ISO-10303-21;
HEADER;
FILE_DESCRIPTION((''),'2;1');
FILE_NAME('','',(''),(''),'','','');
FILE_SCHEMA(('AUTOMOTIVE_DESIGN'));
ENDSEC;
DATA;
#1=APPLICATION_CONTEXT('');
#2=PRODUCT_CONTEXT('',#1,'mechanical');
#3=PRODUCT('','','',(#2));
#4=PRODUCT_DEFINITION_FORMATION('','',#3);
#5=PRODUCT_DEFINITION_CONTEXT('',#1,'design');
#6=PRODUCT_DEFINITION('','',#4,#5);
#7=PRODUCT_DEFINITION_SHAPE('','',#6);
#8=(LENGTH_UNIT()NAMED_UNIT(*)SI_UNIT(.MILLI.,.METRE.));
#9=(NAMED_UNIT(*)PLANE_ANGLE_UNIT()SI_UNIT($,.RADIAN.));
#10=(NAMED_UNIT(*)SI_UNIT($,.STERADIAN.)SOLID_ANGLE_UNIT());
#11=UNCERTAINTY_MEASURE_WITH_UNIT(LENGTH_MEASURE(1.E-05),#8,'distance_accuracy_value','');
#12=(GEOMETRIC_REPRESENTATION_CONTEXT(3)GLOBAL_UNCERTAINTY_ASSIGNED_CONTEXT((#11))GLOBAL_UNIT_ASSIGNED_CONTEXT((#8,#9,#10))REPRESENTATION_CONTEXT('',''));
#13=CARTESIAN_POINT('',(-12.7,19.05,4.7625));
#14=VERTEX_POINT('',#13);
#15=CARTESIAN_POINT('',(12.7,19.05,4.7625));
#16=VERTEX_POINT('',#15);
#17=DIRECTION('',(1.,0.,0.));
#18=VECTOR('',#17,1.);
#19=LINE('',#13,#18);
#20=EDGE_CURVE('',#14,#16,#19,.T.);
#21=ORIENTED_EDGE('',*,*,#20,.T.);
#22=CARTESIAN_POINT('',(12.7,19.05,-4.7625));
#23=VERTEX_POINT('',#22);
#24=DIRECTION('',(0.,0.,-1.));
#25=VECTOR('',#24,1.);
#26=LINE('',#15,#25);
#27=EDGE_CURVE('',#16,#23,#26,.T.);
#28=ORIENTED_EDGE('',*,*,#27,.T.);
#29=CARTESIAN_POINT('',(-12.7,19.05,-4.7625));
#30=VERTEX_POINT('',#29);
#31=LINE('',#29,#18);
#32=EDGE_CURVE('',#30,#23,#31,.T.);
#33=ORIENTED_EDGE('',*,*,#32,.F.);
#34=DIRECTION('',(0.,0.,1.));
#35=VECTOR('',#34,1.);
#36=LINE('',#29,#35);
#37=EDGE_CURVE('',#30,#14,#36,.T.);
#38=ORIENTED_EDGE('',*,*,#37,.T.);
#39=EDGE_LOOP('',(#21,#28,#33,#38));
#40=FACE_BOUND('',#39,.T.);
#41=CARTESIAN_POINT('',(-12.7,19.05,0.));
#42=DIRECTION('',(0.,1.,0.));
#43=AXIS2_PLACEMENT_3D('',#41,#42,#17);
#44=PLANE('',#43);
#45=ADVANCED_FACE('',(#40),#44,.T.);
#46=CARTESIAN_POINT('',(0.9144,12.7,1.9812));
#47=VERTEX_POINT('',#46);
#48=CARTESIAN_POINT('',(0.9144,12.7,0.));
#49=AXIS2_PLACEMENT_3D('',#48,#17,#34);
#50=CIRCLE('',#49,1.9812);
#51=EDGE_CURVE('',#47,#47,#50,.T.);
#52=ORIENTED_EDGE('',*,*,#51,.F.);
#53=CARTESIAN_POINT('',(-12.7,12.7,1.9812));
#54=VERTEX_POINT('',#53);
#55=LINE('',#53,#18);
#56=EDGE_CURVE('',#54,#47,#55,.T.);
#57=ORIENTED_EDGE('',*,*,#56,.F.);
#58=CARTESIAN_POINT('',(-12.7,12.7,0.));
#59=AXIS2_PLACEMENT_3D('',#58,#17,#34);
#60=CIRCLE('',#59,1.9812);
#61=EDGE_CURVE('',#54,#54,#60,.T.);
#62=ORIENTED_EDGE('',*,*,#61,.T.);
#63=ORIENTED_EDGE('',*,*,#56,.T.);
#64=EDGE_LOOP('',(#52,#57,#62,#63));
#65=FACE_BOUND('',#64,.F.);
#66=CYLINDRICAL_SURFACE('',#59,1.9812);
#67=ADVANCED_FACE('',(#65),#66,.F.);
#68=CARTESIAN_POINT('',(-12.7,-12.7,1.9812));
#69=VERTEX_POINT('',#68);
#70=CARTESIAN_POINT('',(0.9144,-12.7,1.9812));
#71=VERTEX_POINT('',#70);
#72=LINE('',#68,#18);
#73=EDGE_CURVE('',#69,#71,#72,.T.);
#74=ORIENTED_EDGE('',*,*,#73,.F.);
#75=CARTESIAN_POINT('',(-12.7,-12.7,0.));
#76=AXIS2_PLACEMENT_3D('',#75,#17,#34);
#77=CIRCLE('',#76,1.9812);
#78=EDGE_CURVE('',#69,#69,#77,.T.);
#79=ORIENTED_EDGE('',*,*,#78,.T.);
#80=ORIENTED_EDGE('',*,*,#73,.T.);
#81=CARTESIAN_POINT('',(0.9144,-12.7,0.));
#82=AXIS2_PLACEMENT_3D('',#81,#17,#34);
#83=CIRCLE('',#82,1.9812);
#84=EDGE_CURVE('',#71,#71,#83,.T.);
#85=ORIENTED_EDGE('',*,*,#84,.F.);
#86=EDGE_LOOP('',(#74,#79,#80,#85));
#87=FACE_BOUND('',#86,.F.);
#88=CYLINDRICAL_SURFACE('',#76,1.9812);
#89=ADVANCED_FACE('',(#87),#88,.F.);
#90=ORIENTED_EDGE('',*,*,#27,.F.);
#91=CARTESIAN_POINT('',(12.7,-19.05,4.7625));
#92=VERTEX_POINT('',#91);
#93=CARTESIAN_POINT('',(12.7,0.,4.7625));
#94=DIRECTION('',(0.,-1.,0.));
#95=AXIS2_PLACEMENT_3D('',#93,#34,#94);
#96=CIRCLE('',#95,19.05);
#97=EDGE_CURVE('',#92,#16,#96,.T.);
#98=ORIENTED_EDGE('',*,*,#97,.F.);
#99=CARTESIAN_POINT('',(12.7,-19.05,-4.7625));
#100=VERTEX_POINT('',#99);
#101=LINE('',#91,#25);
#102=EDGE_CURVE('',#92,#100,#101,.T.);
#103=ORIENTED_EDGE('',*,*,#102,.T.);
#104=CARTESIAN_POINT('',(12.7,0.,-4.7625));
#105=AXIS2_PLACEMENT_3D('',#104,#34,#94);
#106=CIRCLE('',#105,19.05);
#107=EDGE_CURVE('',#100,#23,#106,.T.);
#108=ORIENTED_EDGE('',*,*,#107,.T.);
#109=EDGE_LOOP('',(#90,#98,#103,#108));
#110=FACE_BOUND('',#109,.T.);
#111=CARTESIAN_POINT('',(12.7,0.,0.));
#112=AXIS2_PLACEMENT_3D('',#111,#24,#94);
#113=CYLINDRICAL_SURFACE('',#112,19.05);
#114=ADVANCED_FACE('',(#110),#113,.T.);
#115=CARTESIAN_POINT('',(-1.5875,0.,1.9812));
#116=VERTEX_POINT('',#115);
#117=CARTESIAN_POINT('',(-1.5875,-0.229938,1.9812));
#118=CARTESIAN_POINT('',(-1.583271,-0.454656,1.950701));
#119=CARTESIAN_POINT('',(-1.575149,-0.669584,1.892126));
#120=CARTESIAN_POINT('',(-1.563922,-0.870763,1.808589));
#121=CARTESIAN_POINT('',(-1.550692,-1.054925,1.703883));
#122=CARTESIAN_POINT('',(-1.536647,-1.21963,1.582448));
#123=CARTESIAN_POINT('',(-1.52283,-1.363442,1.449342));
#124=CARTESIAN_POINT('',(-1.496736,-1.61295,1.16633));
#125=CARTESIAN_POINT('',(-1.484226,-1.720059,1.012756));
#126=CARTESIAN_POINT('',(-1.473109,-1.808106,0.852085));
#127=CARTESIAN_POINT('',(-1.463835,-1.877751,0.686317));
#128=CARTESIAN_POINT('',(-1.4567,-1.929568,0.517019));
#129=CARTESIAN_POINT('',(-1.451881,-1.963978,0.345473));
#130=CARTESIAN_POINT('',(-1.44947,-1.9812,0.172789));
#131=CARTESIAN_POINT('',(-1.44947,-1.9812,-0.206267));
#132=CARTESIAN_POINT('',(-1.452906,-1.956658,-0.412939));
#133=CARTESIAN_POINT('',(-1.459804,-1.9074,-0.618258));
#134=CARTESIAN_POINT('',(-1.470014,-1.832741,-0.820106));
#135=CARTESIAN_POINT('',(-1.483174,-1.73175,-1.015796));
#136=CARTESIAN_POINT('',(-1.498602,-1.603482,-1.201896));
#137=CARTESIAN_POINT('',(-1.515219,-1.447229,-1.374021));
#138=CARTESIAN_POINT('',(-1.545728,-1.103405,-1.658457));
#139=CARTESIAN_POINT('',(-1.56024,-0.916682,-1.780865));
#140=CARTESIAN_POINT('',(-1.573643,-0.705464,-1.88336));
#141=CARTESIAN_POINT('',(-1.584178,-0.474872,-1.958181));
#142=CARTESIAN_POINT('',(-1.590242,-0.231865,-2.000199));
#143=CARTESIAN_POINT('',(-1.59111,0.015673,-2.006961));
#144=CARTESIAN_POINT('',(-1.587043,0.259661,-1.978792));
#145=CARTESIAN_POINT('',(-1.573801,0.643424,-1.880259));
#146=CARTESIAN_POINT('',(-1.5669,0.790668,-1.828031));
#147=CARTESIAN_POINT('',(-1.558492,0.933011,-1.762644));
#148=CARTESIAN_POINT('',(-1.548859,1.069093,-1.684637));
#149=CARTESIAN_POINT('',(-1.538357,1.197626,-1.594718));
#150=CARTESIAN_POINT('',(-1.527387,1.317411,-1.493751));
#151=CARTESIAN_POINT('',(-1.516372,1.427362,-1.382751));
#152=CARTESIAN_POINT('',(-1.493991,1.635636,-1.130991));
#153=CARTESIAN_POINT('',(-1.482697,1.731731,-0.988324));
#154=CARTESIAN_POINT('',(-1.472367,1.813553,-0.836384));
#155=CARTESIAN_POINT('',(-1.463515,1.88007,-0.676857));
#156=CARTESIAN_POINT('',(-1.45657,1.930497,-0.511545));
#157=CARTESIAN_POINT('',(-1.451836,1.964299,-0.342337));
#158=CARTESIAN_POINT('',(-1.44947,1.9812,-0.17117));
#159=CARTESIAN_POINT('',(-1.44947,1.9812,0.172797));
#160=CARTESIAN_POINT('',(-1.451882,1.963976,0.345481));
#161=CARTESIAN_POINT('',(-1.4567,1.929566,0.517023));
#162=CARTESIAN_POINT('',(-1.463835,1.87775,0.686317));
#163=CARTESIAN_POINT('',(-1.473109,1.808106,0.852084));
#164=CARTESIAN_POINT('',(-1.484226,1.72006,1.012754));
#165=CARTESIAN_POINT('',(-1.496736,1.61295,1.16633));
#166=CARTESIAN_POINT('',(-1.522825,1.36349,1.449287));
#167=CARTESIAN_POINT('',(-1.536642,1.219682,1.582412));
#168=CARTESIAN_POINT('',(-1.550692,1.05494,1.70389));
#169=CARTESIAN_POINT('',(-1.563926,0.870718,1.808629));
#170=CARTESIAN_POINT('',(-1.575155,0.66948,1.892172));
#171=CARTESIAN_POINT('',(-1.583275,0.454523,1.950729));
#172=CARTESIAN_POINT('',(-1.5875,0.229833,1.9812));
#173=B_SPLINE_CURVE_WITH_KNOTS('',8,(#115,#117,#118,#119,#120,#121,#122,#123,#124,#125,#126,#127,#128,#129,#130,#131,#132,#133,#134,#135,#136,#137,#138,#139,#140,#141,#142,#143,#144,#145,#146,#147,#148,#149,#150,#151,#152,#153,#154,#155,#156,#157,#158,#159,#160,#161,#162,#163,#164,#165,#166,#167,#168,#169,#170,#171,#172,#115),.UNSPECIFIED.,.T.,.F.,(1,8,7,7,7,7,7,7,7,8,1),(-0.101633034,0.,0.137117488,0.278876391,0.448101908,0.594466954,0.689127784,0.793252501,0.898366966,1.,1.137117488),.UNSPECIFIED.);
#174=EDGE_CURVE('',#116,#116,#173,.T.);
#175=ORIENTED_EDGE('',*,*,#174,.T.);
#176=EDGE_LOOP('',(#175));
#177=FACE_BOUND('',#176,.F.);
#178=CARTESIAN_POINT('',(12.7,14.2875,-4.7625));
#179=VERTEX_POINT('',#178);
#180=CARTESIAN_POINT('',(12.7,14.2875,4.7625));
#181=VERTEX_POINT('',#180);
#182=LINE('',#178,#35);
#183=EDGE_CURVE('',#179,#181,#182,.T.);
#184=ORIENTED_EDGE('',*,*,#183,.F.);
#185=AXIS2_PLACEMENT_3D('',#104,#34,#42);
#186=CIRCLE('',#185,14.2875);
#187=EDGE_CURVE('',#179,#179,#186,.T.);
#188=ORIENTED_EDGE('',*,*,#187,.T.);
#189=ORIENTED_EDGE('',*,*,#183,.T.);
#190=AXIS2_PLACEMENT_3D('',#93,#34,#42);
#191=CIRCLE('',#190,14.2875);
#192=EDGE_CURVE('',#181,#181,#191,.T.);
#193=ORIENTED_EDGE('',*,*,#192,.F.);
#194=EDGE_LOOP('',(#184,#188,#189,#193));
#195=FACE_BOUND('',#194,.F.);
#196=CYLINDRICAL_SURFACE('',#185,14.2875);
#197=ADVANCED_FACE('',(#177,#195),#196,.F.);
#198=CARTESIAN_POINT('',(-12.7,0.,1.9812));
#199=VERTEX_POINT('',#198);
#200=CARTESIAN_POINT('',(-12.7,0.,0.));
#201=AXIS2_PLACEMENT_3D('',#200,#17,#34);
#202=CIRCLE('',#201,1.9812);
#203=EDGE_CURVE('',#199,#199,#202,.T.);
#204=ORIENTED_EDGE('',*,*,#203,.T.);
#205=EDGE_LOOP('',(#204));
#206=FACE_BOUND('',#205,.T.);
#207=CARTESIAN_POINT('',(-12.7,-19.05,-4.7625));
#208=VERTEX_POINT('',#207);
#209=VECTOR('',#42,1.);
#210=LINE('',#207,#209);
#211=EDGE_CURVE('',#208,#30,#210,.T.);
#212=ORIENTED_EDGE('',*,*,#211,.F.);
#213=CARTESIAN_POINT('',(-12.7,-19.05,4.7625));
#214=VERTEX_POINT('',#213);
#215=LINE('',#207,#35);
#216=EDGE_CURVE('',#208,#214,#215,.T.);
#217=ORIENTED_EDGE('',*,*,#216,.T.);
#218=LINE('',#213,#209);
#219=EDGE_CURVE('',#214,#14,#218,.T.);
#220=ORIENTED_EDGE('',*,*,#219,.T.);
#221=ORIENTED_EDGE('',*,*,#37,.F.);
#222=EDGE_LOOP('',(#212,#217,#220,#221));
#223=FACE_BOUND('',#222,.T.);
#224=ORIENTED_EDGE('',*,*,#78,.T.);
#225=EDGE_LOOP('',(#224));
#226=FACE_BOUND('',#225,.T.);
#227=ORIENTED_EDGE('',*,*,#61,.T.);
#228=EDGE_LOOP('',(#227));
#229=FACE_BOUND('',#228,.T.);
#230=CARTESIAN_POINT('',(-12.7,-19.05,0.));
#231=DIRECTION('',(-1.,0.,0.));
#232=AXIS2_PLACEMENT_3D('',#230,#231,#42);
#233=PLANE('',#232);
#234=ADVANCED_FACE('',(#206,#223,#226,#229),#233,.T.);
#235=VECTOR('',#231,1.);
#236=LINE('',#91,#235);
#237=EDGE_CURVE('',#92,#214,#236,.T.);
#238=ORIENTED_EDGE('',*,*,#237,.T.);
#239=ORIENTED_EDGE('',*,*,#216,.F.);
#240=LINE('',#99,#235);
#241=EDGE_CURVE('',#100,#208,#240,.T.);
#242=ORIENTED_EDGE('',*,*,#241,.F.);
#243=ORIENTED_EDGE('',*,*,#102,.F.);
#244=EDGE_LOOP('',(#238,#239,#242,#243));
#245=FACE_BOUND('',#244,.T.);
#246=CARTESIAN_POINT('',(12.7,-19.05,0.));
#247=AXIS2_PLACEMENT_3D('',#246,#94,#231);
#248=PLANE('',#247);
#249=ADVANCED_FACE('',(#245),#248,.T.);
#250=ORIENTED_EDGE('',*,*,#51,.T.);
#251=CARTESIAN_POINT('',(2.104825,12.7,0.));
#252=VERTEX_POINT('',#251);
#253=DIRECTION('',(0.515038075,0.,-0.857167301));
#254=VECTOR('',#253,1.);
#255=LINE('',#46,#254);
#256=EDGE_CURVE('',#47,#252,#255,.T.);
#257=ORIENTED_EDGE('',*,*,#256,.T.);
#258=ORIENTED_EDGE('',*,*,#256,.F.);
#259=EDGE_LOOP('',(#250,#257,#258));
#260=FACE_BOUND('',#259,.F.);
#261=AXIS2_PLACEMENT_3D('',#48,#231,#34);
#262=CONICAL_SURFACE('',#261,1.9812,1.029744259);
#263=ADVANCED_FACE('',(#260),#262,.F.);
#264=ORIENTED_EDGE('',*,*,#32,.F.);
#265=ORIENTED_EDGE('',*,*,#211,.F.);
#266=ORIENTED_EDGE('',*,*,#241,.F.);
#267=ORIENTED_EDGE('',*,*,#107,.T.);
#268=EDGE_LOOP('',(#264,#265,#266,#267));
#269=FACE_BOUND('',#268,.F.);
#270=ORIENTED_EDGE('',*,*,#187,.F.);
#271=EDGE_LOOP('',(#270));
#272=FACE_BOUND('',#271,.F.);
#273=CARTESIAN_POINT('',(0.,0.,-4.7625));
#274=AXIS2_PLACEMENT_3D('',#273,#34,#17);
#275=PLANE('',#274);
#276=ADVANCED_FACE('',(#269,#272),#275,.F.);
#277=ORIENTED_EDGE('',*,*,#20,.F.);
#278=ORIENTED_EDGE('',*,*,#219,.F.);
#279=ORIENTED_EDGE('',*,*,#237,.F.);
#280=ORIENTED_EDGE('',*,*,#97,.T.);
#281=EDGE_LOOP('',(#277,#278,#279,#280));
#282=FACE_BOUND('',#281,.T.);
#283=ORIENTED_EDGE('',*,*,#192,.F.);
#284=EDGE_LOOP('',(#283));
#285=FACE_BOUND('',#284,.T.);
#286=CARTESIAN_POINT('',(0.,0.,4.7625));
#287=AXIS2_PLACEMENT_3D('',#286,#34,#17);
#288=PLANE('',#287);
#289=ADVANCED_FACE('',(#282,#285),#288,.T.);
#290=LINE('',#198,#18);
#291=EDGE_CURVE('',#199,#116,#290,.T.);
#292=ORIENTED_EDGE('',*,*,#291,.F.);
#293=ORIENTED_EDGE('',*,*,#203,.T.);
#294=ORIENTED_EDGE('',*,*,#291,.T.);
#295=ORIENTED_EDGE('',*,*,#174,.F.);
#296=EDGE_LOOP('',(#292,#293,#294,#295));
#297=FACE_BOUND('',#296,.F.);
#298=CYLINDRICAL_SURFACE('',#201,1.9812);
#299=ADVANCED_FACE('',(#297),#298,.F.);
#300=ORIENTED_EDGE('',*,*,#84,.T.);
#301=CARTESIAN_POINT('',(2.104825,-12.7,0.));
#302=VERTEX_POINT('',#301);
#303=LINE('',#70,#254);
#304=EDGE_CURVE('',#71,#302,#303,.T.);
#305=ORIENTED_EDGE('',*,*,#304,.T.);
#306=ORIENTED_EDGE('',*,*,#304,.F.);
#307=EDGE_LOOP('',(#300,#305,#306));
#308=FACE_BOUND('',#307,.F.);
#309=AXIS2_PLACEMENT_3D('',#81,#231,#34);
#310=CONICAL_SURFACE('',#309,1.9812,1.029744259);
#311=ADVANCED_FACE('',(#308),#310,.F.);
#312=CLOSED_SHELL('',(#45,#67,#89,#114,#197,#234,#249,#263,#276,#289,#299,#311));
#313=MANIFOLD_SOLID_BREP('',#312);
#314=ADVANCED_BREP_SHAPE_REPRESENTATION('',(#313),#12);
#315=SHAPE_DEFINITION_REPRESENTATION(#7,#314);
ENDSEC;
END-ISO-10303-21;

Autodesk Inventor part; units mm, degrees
ref_plane "YZ Plane" through (0, 0, 0) normal (1, 0, 0) x (0, 1, 0)
ref_plane "XZ Plane" through (0, 0, 0) normal (0, 1, 0) x (-1, 0, 0)
ref_plane "XY Plane" through (0, 0, 0) normal (0, 0, 1) x (1, 0, 0)
sketch "Sketch2" plane through (0, 0, 0) normal (0, 0, 1) x (1, 0, 0)
  line L0 (-12.7, 19.05) -> (12.7, 19.05)
  line L1 (12.7, 19.05) -> (12.7, -19.05) construction
  line L2 (12.7, -19.05) -> (-12.7, -19.05)
  line L3 (-12.7, -19.05) -> (-12.7, 19.05)
  line L4 (-12.7, 19.05) -> (12.7, -19.05) construction
  line L5 (12.7, 19.05) -> (-12.7, -19.05) construction
  arc A0 (12.7, -19.05) -> (12.7, 19.05) centre (12.7, 0) ccw
  point P0 (0, 0)
  point P1 (31.75, 0)
  dimension "d0" = 38.1
  dimension "d1" = 25.4
  dimension "d4" = 44.45
extrude "Extrusion1" add sketch "Sketch2" along normal mid plane 9.525
sketch "Sketch3" plane through (0, 0, -4.7625) normal (0, 0, -1) x (-1, 0, 0)
  arc A0 (-12.7, 19.05) -> (-12.7, -19.05) centre (-12.7, 0) ccw construction
  point P0 (0, 0)
hole "Hole1" at (12.7, 0, -4.7625) direction (0, 0, 1) diameter 28.575 end through all
sketch "Sketch4" plane through (-12.7, -19.05, 4.7625) normal (-1, 0, 0) x (0, 0, 1)
  line L0 (-4.7625, 6.35) -> (-4.7625, 31.75) construction
  point P0 (-4.7625, 19.05)
  point P1 (-4.7625, 19.05)
  dimension "d12" = 25.4
hole "Hole2" at (-12.7, -12.7, 0) at (-12.7, 12.7, 0) at (-12.7, 0, 0) direction (1, 0, 0) diameter 3.9624 depth 13.6144 tip angle 118 thread size "10-32 UNF" class "2B" standard "ANSI Unified Screw Threads"
properties part number "PLATE,BEARING,DRIVE,ELEVATOR" material "Aluminum, 7075-T6"
